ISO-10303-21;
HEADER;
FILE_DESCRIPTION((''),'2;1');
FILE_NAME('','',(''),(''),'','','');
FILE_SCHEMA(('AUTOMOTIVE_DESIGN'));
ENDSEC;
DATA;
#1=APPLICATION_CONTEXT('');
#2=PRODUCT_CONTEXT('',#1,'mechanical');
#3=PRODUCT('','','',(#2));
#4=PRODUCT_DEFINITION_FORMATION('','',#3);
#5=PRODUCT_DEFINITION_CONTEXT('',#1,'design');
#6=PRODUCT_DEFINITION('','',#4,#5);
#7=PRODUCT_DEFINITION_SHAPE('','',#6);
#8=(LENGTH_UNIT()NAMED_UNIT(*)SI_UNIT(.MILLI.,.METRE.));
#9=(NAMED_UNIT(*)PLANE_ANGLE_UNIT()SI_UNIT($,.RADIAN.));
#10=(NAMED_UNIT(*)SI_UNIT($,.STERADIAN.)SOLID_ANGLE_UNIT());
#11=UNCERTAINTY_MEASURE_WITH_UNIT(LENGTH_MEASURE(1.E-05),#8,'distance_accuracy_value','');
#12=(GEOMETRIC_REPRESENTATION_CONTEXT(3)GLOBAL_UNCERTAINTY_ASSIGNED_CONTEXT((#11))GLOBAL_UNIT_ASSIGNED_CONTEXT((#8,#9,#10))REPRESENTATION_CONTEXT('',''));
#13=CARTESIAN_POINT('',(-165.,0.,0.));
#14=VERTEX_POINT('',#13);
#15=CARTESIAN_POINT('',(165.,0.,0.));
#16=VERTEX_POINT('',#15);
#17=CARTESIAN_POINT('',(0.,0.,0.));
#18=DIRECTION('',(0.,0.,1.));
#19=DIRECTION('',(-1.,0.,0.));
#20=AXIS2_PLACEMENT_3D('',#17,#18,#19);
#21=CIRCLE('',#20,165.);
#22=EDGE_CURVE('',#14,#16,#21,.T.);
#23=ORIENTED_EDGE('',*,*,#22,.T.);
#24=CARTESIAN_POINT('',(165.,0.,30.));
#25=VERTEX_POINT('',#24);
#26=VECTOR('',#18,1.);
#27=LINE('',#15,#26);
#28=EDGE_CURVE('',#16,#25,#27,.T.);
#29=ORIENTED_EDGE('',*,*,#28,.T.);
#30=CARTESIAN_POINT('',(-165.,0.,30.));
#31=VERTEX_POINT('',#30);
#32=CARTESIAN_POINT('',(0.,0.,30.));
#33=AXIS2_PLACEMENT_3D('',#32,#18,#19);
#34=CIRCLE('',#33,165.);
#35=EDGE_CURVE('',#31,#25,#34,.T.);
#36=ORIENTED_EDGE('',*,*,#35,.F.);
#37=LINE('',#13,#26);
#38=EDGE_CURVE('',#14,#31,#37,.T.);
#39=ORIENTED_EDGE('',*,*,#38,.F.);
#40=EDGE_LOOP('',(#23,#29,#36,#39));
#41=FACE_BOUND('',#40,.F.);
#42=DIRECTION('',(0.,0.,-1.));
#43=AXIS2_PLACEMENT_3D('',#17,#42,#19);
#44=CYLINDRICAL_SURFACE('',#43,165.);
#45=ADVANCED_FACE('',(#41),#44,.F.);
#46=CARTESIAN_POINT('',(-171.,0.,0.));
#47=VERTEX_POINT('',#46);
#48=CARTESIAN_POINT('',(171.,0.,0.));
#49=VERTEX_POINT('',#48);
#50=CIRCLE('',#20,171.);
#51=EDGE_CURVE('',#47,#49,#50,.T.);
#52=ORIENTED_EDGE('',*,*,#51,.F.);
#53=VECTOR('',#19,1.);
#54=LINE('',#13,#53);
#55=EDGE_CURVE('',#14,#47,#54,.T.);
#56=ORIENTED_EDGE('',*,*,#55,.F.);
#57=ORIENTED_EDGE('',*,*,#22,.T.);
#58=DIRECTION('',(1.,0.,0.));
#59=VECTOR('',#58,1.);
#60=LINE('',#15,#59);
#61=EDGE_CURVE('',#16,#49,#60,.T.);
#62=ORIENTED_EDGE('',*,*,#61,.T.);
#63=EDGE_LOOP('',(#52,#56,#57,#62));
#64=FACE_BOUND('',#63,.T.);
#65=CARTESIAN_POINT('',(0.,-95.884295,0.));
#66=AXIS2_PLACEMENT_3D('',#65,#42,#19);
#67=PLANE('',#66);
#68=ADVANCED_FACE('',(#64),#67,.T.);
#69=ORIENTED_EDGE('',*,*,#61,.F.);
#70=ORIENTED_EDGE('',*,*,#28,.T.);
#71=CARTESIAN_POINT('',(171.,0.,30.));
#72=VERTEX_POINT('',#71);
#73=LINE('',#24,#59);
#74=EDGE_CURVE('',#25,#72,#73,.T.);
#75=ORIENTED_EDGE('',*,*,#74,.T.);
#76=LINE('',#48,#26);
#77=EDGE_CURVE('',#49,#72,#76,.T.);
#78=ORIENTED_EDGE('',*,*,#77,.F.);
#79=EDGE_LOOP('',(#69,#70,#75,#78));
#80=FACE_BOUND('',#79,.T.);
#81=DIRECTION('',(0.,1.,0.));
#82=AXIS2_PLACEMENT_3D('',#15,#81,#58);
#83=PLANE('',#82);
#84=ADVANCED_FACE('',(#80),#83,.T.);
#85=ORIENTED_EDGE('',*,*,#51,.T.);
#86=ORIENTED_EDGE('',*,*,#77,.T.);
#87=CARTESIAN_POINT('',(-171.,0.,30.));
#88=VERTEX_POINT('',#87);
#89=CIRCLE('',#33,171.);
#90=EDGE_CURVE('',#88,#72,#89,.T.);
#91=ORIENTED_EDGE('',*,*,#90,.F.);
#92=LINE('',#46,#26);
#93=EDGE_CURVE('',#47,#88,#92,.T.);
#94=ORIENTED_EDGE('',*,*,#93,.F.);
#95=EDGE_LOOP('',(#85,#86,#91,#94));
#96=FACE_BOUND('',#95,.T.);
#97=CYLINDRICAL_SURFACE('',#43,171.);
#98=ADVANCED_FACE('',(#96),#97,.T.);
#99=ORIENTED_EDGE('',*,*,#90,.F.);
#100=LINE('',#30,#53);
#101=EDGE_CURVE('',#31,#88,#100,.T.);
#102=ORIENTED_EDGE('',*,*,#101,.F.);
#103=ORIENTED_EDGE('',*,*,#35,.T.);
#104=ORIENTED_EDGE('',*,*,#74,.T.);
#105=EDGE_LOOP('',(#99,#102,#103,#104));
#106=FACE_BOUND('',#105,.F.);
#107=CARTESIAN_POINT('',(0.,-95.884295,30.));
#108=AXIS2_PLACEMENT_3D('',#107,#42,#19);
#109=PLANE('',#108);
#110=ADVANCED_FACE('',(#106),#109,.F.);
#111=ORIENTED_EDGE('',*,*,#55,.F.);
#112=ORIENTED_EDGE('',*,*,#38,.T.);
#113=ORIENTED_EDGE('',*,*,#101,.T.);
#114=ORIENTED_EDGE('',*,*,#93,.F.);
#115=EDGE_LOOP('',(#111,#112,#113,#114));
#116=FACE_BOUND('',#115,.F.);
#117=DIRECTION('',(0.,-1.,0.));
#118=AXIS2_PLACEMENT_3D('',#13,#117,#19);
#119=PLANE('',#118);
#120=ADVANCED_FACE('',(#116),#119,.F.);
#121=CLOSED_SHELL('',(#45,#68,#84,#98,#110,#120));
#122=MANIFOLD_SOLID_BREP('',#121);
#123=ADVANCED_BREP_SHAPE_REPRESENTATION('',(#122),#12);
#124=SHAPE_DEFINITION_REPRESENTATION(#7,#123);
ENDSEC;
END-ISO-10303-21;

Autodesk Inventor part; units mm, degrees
ref_plane "YZ Plane" through (0, 0, 0) normal (1, 0, 0) x (0, 1, 0)
ref_plane "XZ Plane" through (0, 0, 0) normal (0, 1, 0) x (-1, 0, 0)
ref_plane "XY Plane" through (0, 0, 0) normal (0, 0, 1) x (1, 0, 0)
sketch "Sketch8" plane through (0, 0, 0) normal (0, 0, 1) x (1, 0, 0)
  arc A0 (-165, 0) -> (165, 0) centre (0, 0) ccw
  dimension "d46" = 330
contour flange "Contour Flange1" sketch "Sketch8" thickness 6 bend radius 6 width 30 along (0, 0, 1) mid plane no both sides no wall seen from (0, -165, 0) lies toward (0, -1, 0) curves A0
bend "Bend1"
corner "Corner1"
equation "\"d47\" = Thickness"
equation "\"d48\" = BendReliefWidth"
equation "\"d49\" = BendReliefDepth"
equation "\"d50\" = MinimumRemnant"
equation "\"d51\" = TransitionRadius"
equation "\"d53\" = BendRadius"
equation "\"d55\" = CornerReliefSize"
equation "\"d56\" = GapSize"
equation "\"d57\" = JacobiRadiusSize"
equation "\"BendRadius\" = Thickness"
equation "\"BendReliefWidth\" = Thickness"
equation "\"BendReliefDepth\" = 0.5 * Thickness"
equation "\"CornerReliefSize\" = 4 * Thickness"
equation "\"MinimumRemnant\" = 2 * Thickness"
equation "\"TransitionRadius\" = BendRadius"
equation "\"JacobiRadiusSize\" = BendRadius"
equation "\"GapSize\" = Thickness"
equation "\"Thickness\" = 6"
properties part number "ДМФ 092 Постель НОС v2.0"
